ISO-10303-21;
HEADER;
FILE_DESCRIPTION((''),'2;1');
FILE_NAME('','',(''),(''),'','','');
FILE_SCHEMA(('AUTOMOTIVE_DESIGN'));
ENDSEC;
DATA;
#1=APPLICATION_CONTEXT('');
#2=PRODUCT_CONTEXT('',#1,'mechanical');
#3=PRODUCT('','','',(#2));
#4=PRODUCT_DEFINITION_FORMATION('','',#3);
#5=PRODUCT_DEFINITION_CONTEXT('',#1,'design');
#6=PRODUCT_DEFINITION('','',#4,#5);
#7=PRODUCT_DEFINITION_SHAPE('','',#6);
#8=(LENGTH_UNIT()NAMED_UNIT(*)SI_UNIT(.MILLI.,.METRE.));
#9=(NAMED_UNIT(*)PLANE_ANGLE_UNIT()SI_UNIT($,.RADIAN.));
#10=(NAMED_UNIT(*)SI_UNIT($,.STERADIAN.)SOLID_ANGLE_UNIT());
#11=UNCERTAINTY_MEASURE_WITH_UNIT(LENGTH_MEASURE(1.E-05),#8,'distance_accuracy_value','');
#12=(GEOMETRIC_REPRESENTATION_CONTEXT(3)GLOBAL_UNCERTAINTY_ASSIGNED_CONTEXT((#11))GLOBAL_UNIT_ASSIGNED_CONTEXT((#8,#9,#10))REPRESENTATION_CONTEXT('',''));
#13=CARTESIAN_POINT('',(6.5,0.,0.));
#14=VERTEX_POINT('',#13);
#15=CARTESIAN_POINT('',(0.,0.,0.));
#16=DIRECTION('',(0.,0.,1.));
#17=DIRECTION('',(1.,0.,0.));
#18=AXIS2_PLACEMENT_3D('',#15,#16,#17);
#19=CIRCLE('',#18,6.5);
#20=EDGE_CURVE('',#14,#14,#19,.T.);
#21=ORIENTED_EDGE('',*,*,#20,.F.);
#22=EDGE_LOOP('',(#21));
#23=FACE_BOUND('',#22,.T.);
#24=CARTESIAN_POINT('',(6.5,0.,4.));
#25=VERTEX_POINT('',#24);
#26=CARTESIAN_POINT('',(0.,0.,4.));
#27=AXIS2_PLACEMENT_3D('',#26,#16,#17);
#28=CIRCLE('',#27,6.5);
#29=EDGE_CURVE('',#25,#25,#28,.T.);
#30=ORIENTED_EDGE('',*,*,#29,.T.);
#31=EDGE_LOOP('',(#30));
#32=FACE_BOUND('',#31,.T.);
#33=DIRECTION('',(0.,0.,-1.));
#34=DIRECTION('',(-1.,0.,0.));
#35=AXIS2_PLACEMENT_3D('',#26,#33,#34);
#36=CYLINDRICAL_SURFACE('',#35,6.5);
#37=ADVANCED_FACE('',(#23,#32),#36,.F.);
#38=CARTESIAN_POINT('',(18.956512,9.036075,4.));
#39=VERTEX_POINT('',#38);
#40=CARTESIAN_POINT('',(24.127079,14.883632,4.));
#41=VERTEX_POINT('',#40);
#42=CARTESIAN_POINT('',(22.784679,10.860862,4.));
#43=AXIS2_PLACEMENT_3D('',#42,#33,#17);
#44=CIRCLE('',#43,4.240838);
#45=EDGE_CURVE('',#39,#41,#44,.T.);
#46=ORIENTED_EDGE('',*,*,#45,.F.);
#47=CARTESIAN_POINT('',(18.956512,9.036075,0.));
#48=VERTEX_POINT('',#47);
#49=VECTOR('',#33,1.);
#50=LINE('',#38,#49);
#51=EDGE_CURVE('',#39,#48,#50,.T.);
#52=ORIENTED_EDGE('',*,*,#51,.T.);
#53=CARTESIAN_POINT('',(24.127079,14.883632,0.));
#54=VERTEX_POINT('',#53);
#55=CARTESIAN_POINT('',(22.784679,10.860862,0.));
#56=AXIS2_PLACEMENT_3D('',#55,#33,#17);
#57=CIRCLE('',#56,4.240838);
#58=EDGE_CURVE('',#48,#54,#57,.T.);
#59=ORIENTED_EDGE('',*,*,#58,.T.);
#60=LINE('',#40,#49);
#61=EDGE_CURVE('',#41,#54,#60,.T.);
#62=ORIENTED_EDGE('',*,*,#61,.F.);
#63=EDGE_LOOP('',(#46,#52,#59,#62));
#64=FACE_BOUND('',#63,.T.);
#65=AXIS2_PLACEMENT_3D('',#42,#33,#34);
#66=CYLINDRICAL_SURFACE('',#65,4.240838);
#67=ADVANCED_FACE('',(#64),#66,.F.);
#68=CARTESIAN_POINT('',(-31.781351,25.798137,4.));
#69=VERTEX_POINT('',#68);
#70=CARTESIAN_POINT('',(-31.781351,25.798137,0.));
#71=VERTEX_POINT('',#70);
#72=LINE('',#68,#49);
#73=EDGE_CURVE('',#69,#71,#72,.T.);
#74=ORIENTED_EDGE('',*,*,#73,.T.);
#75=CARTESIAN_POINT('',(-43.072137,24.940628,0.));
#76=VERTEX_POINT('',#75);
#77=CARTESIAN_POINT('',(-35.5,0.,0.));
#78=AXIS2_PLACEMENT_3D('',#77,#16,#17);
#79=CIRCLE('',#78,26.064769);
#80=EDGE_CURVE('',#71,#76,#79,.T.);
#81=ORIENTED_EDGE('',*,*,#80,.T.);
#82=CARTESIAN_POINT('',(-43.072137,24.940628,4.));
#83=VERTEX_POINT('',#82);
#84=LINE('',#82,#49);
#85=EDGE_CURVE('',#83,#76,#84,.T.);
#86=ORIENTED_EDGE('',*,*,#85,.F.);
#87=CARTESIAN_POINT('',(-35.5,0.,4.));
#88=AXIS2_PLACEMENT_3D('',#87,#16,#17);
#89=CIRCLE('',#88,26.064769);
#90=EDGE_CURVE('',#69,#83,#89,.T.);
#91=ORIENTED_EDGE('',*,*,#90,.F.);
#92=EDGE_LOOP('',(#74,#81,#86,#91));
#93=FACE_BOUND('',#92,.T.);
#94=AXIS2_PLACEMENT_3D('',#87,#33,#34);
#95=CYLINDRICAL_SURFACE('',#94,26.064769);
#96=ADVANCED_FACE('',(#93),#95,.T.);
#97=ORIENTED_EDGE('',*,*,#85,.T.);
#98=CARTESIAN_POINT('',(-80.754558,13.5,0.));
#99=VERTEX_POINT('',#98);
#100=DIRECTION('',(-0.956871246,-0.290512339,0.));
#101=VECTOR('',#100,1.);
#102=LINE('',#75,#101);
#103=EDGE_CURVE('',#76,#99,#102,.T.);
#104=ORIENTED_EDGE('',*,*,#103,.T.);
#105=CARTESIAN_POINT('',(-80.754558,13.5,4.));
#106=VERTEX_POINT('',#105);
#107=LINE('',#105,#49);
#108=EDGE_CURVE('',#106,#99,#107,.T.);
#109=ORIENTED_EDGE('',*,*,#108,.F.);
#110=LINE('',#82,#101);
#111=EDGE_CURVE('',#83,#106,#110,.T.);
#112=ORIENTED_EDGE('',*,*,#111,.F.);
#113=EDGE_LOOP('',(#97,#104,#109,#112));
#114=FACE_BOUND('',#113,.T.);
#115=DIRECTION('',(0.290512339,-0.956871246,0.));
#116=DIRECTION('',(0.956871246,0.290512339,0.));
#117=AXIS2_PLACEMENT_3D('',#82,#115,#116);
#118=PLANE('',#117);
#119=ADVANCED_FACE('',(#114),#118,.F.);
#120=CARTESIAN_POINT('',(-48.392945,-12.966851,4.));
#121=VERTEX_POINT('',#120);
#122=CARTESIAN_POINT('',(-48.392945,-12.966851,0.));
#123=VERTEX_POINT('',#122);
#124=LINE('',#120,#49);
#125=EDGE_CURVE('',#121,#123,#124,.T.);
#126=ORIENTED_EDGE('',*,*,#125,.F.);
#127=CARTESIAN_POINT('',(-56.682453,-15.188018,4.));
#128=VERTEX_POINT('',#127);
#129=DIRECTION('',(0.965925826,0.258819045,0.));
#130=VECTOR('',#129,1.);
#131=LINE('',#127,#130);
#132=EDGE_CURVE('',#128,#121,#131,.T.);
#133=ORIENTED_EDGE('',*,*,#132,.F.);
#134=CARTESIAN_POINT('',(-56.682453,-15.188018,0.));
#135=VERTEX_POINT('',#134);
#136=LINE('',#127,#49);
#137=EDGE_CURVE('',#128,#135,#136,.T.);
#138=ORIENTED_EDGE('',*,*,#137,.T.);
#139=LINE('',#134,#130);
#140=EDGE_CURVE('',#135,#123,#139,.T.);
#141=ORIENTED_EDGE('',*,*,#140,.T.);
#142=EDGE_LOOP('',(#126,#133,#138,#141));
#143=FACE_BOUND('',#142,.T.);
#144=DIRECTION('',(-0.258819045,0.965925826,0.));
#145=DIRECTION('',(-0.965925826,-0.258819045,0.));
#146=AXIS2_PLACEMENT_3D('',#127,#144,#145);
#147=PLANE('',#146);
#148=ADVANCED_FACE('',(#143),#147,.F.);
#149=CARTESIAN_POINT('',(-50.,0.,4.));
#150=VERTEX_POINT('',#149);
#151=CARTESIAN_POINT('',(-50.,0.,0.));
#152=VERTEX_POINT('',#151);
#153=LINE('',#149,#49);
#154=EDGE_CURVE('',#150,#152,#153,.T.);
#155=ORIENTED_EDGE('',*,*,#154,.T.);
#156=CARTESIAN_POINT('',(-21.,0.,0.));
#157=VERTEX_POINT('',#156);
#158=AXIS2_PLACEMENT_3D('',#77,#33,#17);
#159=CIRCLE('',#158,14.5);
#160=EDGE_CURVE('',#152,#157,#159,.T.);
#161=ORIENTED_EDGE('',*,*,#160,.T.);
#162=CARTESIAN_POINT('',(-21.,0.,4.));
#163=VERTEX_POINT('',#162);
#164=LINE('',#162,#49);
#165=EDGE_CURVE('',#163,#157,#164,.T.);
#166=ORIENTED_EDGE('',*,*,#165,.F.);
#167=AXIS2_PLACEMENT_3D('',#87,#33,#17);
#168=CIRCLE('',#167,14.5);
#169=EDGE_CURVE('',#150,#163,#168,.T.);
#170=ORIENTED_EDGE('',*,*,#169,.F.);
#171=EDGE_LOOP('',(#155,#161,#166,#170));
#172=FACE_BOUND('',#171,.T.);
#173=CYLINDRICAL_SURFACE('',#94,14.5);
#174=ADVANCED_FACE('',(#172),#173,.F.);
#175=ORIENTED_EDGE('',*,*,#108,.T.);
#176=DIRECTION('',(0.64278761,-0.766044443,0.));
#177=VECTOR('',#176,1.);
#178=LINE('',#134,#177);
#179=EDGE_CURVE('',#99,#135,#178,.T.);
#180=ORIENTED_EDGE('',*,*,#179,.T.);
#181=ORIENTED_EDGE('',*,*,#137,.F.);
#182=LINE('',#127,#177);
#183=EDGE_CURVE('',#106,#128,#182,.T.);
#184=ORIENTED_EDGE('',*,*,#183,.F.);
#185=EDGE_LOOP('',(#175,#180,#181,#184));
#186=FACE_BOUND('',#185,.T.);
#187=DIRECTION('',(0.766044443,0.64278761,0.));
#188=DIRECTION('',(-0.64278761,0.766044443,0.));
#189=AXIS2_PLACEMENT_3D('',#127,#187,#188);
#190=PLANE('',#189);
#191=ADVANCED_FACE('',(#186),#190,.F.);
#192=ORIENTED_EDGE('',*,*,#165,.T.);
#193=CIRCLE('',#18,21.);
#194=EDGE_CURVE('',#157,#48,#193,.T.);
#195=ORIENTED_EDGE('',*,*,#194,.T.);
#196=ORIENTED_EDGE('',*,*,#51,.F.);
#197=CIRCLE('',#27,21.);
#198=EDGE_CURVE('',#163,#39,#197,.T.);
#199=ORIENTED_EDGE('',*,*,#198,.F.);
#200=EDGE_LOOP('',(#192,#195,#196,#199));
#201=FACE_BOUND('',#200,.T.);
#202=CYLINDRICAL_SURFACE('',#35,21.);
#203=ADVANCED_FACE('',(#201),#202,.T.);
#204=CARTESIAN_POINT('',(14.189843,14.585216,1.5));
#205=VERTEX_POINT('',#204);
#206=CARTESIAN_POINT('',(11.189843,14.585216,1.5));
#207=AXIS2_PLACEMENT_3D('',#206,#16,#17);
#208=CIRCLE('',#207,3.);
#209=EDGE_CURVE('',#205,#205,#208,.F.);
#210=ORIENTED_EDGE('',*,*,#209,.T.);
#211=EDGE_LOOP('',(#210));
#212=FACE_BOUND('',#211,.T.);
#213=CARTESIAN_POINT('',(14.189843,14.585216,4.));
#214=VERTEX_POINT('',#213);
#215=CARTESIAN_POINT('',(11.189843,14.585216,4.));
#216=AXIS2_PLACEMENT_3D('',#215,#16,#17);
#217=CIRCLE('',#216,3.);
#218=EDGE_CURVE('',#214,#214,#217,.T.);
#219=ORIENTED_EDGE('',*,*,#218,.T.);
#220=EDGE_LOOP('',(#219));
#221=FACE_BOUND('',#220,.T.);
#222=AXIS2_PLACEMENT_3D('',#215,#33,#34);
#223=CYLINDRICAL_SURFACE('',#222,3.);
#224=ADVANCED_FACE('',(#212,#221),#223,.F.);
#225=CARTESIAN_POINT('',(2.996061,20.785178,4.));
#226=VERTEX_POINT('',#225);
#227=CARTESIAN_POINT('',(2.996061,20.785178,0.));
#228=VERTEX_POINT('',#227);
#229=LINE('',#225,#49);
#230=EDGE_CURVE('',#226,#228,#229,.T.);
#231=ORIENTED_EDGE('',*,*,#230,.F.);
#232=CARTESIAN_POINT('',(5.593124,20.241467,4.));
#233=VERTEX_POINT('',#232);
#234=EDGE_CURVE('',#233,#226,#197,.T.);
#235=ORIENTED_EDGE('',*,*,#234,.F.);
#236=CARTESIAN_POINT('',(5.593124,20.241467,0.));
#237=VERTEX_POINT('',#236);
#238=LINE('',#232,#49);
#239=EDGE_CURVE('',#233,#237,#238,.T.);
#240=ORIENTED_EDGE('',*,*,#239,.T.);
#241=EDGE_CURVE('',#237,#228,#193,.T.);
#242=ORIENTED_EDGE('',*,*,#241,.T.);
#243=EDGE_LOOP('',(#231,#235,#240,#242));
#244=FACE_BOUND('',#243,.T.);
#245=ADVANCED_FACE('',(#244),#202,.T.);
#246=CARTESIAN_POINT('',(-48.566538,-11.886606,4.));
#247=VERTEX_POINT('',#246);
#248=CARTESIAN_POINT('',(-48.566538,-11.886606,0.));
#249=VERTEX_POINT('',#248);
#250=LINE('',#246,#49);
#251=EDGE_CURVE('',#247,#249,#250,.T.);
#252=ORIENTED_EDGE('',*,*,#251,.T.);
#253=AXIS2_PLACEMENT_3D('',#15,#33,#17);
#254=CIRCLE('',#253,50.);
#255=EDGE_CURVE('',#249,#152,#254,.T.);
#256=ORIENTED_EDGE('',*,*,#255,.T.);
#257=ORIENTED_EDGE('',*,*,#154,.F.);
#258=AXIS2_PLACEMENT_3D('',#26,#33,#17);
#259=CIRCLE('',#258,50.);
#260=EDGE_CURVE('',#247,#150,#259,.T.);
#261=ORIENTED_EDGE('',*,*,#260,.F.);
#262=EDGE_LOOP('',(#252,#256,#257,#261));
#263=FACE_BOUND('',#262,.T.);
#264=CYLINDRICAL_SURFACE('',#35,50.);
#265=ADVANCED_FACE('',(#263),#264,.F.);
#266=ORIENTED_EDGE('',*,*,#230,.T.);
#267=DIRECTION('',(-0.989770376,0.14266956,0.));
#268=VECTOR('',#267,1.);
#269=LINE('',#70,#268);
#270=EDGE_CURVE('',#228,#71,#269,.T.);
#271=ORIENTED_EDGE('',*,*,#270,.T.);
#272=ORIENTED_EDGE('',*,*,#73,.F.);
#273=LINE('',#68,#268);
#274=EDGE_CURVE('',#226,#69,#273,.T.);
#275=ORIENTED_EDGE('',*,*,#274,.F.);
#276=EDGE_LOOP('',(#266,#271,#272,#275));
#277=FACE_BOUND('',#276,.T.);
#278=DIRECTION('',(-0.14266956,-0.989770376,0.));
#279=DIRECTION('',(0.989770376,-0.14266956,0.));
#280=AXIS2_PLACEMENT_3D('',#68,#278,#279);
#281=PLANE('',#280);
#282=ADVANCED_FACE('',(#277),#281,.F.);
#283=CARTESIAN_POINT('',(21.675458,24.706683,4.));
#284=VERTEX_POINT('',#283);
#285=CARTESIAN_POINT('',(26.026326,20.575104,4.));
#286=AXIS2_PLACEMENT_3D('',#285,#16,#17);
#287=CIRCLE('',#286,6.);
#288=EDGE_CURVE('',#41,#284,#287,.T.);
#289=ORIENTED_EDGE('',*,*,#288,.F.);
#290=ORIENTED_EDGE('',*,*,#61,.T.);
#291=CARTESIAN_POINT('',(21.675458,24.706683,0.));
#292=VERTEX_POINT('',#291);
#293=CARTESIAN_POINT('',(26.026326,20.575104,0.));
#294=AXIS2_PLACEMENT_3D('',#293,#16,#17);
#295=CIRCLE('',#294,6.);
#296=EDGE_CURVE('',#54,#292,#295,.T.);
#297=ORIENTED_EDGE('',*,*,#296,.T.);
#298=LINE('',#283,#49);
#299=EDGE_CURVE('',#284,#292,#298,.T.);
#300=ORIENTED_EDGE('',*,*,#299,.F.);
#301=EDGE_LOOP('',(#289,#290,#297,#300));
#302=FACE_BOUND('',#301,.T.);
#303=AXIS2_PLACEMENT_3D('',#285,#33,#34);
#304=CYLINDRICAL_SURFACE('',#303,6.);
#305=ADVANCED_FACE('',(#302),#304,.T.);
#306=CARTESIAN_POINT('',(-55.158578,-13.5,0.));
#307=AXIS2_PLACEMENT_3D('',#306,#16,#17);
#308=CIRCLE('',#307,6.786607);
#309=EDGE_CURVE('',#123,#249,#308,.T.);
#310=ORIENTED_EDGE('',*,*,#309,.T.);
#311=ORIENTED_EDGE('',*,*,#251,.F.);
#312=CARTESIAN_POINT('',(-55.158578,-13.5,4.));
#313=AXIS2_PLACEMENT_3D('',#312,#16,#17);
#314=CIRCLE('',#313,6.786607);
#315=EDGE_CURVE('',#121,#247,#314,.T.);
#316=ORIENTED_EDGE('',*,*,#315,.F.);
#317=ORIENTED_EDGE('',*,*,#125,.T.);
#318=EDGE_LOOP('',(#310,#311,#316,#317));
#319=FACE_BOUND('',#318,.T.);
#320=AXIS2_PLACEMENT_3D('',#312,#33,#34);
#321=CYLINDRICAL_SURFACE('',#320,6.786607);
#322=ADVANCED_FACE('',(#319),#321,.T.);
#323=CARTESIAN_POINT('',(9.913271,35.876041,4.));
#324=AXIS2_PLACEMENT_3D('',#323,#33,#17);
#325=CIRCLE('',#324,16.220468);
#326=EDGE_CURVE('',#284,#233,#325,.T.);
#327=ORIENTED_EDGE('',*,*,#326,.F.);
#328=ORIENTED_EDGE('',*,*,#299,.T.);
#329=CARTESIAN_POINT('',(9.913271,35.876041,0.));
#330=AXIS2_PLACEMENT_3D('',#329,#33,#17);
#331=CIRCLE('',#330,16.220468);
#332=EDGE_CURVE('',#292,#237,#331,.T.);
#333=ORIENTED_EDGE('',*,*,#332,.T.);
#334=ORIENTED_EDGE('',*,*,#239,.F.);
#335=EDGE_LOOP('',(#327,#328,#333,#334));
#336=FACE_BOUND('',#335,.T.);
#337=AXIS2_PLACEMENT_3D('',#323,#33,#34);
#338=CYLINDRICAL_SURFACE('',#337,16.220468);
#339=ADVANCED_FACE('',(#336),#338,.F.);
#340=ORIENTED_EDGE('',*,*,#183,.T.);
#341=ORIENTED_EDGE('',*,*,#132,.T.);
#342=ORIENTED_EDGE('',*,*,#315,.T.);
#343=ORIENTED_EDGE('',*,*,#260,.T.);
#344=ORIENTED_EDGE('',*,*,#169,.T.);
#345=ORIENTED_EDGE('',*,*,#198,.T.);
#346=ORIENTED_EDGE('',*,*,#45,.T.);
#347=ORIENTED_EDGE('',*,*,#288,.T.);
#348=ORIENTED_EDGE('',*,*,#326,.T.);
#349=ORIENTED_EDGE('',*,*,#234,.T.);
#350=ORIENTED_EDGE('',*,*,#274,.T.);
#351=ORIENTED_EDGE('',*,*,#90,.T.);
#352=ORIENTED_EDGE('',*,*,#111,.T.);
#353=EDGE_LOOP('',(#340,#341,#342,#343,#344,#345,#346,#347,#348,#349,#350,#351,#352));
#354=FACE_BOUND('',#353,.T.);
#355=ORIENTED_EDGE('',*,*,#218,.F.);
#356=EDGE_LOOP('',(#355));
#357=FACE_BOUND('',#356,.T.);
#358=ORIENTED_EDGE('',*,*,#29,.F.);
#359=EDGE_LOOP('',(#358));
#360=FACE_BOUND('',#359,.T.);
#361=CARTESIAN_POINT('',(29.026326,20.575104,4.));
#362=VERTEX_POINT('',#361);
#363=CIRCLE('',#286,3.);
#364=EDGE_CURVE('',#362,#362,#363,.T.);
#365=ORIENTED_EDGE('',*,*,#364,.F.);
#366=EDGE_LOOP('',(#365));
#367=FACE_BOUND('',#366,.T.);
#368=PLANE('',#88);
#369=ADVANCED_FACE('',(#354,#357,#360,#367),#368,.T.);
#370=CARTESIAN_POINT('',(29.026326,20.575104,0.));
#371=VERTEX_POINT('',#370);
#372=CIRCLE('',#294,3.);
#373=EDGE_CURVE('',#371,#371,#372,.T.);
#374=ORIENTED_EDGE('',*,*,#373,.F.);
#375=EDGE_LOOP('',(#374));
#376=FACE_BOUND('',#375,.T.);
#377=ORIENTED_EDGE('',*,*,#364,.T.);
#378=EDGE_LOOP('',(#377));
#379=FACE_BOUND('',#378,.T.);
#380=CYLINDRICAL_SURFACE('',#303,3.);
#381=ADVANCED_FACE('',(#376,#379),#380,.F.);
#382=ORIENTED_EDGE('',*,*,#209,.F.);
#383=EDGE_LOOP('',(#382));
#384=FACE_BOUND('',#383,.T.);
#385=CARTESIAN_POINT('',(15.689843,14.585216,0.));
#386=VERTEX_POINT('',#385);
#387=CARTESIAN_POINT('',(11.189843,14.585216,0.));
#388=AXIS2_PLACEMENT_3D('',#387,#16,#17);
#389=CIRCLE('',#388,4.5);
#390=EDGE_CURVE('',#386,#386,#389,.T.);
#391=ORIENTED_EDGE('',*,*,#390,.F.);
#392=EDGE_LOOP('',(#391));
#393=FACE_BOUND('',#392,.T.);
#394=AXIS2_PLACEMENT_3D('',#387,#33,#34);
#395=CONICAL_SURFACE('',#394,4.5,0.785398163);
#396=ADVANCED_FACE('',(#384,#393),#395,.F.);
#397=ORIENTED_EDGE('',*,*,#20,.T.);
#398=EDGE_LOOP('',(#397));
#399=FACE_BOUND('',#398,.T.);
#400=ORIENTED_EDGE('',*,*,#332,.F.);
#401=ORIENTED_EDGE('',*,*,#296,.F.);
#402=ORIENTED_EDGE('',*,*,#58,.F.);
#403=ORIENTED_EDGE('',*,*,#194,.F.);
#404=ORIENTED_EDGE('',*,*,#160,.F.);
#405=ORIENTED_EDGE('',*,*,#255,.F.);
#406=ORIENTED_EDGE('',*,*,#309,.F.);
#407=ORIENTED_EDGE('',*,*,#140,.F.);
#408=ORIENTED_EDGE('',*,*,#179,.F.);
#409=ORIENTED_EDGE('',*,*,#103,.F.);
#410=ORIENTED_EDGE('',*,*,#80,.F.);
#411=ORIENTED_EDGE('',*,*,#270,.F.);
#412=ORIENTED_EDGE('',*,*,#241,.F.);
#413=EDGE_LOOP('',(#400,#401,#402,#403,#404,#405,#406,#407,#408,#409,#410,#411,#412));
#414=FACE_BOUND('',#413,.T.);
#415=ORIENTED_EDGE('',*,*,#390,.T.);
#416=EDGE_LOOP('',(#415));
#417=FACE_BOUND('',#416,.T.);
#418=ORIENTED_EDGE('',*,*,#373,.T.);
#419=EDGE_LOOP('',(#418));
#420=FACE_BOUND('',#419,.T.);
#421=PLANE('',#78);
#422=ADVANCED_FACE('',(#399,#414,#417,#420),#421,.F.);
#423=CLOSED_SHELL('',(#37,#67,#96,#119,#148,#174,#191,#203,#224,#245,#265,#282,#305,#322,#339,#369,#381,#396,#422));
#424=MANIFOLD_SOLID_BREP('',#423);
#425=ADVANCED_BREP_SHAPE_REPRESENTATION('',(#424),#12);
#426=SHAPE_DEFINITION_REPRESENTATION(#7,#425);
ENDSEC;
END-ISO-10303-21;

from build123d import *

# Parameters (mm, degrees)
SKETCH_1_R             = 3
SKETCH_1_R_2           = 6.5
SM_BASE_FLANGE_1_DEPTH = 4
CHAMFER_2_SIZE         = 1.5


# Sheet-metal steps are written as plain solids
with BuildPart() as part:
    # Sketch 1 → Базовая кромка1 (new body)
    with BuildSketch(Plane.XY):
        with BuildLine():
            Line((-31.781350826, 25.798136577), (2.996060756, 20.785177891))
            ThreePointArc((2.996060756, 20.785177891), (4.303188162, 20.554380838), (5.593123802, 20.241466502))
            ThreePointArc((5.593123802, 20.241466502), (14.252686638, 20.246803625), (21.67545772, 24.706683273))
            ThreePointArc((21.67545772, 24.706683273), (31.84775804, 22.028007779), (24.127078994, 14.883631579))
            ThreePointArc((24.127078994, 14.883631579), (19.607693171, 13.67003856), (18.956512096, 9.036074875))
            ThreePointArc((18.956512096, 9.036074875), (4.632129423, -20.482758042), (-21, 0))
            ThreePointArc((-21, 0), (-35.5, 14.5), (-50, 0))
            ThreePointArc((-50, 0), (-49.640340933, -5.986363846), (-48.566537916, -11.88660569))
            ThreePointArc((-48.566537916, -11.88660569), (-48.457937157, -12.423224233), (-48.39294532, -12.966850618))
            Line((-48.39294532, -12.966850618), (-56.68245323, -15.188017568))
            Line((-56.68245323, -15.188017568), (-80.754558191, 13.5))
            Line((-80.754558191, 13.5), (-43.07213712, 24.940628339))
            ThreePointArc((-43.07213712, 24.940628339), (-37.473872446, 25.989921702), (-31.781350826, 25.798136577))
        make_face()
        with Locations((11.189842551, 14.585216118)):
            Circle(SKETCH_1_R, mode=Mode.SUBTRACT)
        Circle(SKETCH_1_R_2, mode=Mode.SUBTRACT)
        with Locations((26.026325977, 20.575104227)):
            Circle(SKETCH_1_R, mode=Mode.SUBTRACT)
    extrude(amount=SM_BASE_FLANGE_1_DEPTH)

    # Фаска2
    chamfer_2_edges = [part.edges().sort_by_distance(p)[0] for p in [
        (8.189842551, 14.585216118, 0),
    ]]
    chamfer(chamfer_2_edges, length=CHAMFER_2_SIZE)


solid = part.part
